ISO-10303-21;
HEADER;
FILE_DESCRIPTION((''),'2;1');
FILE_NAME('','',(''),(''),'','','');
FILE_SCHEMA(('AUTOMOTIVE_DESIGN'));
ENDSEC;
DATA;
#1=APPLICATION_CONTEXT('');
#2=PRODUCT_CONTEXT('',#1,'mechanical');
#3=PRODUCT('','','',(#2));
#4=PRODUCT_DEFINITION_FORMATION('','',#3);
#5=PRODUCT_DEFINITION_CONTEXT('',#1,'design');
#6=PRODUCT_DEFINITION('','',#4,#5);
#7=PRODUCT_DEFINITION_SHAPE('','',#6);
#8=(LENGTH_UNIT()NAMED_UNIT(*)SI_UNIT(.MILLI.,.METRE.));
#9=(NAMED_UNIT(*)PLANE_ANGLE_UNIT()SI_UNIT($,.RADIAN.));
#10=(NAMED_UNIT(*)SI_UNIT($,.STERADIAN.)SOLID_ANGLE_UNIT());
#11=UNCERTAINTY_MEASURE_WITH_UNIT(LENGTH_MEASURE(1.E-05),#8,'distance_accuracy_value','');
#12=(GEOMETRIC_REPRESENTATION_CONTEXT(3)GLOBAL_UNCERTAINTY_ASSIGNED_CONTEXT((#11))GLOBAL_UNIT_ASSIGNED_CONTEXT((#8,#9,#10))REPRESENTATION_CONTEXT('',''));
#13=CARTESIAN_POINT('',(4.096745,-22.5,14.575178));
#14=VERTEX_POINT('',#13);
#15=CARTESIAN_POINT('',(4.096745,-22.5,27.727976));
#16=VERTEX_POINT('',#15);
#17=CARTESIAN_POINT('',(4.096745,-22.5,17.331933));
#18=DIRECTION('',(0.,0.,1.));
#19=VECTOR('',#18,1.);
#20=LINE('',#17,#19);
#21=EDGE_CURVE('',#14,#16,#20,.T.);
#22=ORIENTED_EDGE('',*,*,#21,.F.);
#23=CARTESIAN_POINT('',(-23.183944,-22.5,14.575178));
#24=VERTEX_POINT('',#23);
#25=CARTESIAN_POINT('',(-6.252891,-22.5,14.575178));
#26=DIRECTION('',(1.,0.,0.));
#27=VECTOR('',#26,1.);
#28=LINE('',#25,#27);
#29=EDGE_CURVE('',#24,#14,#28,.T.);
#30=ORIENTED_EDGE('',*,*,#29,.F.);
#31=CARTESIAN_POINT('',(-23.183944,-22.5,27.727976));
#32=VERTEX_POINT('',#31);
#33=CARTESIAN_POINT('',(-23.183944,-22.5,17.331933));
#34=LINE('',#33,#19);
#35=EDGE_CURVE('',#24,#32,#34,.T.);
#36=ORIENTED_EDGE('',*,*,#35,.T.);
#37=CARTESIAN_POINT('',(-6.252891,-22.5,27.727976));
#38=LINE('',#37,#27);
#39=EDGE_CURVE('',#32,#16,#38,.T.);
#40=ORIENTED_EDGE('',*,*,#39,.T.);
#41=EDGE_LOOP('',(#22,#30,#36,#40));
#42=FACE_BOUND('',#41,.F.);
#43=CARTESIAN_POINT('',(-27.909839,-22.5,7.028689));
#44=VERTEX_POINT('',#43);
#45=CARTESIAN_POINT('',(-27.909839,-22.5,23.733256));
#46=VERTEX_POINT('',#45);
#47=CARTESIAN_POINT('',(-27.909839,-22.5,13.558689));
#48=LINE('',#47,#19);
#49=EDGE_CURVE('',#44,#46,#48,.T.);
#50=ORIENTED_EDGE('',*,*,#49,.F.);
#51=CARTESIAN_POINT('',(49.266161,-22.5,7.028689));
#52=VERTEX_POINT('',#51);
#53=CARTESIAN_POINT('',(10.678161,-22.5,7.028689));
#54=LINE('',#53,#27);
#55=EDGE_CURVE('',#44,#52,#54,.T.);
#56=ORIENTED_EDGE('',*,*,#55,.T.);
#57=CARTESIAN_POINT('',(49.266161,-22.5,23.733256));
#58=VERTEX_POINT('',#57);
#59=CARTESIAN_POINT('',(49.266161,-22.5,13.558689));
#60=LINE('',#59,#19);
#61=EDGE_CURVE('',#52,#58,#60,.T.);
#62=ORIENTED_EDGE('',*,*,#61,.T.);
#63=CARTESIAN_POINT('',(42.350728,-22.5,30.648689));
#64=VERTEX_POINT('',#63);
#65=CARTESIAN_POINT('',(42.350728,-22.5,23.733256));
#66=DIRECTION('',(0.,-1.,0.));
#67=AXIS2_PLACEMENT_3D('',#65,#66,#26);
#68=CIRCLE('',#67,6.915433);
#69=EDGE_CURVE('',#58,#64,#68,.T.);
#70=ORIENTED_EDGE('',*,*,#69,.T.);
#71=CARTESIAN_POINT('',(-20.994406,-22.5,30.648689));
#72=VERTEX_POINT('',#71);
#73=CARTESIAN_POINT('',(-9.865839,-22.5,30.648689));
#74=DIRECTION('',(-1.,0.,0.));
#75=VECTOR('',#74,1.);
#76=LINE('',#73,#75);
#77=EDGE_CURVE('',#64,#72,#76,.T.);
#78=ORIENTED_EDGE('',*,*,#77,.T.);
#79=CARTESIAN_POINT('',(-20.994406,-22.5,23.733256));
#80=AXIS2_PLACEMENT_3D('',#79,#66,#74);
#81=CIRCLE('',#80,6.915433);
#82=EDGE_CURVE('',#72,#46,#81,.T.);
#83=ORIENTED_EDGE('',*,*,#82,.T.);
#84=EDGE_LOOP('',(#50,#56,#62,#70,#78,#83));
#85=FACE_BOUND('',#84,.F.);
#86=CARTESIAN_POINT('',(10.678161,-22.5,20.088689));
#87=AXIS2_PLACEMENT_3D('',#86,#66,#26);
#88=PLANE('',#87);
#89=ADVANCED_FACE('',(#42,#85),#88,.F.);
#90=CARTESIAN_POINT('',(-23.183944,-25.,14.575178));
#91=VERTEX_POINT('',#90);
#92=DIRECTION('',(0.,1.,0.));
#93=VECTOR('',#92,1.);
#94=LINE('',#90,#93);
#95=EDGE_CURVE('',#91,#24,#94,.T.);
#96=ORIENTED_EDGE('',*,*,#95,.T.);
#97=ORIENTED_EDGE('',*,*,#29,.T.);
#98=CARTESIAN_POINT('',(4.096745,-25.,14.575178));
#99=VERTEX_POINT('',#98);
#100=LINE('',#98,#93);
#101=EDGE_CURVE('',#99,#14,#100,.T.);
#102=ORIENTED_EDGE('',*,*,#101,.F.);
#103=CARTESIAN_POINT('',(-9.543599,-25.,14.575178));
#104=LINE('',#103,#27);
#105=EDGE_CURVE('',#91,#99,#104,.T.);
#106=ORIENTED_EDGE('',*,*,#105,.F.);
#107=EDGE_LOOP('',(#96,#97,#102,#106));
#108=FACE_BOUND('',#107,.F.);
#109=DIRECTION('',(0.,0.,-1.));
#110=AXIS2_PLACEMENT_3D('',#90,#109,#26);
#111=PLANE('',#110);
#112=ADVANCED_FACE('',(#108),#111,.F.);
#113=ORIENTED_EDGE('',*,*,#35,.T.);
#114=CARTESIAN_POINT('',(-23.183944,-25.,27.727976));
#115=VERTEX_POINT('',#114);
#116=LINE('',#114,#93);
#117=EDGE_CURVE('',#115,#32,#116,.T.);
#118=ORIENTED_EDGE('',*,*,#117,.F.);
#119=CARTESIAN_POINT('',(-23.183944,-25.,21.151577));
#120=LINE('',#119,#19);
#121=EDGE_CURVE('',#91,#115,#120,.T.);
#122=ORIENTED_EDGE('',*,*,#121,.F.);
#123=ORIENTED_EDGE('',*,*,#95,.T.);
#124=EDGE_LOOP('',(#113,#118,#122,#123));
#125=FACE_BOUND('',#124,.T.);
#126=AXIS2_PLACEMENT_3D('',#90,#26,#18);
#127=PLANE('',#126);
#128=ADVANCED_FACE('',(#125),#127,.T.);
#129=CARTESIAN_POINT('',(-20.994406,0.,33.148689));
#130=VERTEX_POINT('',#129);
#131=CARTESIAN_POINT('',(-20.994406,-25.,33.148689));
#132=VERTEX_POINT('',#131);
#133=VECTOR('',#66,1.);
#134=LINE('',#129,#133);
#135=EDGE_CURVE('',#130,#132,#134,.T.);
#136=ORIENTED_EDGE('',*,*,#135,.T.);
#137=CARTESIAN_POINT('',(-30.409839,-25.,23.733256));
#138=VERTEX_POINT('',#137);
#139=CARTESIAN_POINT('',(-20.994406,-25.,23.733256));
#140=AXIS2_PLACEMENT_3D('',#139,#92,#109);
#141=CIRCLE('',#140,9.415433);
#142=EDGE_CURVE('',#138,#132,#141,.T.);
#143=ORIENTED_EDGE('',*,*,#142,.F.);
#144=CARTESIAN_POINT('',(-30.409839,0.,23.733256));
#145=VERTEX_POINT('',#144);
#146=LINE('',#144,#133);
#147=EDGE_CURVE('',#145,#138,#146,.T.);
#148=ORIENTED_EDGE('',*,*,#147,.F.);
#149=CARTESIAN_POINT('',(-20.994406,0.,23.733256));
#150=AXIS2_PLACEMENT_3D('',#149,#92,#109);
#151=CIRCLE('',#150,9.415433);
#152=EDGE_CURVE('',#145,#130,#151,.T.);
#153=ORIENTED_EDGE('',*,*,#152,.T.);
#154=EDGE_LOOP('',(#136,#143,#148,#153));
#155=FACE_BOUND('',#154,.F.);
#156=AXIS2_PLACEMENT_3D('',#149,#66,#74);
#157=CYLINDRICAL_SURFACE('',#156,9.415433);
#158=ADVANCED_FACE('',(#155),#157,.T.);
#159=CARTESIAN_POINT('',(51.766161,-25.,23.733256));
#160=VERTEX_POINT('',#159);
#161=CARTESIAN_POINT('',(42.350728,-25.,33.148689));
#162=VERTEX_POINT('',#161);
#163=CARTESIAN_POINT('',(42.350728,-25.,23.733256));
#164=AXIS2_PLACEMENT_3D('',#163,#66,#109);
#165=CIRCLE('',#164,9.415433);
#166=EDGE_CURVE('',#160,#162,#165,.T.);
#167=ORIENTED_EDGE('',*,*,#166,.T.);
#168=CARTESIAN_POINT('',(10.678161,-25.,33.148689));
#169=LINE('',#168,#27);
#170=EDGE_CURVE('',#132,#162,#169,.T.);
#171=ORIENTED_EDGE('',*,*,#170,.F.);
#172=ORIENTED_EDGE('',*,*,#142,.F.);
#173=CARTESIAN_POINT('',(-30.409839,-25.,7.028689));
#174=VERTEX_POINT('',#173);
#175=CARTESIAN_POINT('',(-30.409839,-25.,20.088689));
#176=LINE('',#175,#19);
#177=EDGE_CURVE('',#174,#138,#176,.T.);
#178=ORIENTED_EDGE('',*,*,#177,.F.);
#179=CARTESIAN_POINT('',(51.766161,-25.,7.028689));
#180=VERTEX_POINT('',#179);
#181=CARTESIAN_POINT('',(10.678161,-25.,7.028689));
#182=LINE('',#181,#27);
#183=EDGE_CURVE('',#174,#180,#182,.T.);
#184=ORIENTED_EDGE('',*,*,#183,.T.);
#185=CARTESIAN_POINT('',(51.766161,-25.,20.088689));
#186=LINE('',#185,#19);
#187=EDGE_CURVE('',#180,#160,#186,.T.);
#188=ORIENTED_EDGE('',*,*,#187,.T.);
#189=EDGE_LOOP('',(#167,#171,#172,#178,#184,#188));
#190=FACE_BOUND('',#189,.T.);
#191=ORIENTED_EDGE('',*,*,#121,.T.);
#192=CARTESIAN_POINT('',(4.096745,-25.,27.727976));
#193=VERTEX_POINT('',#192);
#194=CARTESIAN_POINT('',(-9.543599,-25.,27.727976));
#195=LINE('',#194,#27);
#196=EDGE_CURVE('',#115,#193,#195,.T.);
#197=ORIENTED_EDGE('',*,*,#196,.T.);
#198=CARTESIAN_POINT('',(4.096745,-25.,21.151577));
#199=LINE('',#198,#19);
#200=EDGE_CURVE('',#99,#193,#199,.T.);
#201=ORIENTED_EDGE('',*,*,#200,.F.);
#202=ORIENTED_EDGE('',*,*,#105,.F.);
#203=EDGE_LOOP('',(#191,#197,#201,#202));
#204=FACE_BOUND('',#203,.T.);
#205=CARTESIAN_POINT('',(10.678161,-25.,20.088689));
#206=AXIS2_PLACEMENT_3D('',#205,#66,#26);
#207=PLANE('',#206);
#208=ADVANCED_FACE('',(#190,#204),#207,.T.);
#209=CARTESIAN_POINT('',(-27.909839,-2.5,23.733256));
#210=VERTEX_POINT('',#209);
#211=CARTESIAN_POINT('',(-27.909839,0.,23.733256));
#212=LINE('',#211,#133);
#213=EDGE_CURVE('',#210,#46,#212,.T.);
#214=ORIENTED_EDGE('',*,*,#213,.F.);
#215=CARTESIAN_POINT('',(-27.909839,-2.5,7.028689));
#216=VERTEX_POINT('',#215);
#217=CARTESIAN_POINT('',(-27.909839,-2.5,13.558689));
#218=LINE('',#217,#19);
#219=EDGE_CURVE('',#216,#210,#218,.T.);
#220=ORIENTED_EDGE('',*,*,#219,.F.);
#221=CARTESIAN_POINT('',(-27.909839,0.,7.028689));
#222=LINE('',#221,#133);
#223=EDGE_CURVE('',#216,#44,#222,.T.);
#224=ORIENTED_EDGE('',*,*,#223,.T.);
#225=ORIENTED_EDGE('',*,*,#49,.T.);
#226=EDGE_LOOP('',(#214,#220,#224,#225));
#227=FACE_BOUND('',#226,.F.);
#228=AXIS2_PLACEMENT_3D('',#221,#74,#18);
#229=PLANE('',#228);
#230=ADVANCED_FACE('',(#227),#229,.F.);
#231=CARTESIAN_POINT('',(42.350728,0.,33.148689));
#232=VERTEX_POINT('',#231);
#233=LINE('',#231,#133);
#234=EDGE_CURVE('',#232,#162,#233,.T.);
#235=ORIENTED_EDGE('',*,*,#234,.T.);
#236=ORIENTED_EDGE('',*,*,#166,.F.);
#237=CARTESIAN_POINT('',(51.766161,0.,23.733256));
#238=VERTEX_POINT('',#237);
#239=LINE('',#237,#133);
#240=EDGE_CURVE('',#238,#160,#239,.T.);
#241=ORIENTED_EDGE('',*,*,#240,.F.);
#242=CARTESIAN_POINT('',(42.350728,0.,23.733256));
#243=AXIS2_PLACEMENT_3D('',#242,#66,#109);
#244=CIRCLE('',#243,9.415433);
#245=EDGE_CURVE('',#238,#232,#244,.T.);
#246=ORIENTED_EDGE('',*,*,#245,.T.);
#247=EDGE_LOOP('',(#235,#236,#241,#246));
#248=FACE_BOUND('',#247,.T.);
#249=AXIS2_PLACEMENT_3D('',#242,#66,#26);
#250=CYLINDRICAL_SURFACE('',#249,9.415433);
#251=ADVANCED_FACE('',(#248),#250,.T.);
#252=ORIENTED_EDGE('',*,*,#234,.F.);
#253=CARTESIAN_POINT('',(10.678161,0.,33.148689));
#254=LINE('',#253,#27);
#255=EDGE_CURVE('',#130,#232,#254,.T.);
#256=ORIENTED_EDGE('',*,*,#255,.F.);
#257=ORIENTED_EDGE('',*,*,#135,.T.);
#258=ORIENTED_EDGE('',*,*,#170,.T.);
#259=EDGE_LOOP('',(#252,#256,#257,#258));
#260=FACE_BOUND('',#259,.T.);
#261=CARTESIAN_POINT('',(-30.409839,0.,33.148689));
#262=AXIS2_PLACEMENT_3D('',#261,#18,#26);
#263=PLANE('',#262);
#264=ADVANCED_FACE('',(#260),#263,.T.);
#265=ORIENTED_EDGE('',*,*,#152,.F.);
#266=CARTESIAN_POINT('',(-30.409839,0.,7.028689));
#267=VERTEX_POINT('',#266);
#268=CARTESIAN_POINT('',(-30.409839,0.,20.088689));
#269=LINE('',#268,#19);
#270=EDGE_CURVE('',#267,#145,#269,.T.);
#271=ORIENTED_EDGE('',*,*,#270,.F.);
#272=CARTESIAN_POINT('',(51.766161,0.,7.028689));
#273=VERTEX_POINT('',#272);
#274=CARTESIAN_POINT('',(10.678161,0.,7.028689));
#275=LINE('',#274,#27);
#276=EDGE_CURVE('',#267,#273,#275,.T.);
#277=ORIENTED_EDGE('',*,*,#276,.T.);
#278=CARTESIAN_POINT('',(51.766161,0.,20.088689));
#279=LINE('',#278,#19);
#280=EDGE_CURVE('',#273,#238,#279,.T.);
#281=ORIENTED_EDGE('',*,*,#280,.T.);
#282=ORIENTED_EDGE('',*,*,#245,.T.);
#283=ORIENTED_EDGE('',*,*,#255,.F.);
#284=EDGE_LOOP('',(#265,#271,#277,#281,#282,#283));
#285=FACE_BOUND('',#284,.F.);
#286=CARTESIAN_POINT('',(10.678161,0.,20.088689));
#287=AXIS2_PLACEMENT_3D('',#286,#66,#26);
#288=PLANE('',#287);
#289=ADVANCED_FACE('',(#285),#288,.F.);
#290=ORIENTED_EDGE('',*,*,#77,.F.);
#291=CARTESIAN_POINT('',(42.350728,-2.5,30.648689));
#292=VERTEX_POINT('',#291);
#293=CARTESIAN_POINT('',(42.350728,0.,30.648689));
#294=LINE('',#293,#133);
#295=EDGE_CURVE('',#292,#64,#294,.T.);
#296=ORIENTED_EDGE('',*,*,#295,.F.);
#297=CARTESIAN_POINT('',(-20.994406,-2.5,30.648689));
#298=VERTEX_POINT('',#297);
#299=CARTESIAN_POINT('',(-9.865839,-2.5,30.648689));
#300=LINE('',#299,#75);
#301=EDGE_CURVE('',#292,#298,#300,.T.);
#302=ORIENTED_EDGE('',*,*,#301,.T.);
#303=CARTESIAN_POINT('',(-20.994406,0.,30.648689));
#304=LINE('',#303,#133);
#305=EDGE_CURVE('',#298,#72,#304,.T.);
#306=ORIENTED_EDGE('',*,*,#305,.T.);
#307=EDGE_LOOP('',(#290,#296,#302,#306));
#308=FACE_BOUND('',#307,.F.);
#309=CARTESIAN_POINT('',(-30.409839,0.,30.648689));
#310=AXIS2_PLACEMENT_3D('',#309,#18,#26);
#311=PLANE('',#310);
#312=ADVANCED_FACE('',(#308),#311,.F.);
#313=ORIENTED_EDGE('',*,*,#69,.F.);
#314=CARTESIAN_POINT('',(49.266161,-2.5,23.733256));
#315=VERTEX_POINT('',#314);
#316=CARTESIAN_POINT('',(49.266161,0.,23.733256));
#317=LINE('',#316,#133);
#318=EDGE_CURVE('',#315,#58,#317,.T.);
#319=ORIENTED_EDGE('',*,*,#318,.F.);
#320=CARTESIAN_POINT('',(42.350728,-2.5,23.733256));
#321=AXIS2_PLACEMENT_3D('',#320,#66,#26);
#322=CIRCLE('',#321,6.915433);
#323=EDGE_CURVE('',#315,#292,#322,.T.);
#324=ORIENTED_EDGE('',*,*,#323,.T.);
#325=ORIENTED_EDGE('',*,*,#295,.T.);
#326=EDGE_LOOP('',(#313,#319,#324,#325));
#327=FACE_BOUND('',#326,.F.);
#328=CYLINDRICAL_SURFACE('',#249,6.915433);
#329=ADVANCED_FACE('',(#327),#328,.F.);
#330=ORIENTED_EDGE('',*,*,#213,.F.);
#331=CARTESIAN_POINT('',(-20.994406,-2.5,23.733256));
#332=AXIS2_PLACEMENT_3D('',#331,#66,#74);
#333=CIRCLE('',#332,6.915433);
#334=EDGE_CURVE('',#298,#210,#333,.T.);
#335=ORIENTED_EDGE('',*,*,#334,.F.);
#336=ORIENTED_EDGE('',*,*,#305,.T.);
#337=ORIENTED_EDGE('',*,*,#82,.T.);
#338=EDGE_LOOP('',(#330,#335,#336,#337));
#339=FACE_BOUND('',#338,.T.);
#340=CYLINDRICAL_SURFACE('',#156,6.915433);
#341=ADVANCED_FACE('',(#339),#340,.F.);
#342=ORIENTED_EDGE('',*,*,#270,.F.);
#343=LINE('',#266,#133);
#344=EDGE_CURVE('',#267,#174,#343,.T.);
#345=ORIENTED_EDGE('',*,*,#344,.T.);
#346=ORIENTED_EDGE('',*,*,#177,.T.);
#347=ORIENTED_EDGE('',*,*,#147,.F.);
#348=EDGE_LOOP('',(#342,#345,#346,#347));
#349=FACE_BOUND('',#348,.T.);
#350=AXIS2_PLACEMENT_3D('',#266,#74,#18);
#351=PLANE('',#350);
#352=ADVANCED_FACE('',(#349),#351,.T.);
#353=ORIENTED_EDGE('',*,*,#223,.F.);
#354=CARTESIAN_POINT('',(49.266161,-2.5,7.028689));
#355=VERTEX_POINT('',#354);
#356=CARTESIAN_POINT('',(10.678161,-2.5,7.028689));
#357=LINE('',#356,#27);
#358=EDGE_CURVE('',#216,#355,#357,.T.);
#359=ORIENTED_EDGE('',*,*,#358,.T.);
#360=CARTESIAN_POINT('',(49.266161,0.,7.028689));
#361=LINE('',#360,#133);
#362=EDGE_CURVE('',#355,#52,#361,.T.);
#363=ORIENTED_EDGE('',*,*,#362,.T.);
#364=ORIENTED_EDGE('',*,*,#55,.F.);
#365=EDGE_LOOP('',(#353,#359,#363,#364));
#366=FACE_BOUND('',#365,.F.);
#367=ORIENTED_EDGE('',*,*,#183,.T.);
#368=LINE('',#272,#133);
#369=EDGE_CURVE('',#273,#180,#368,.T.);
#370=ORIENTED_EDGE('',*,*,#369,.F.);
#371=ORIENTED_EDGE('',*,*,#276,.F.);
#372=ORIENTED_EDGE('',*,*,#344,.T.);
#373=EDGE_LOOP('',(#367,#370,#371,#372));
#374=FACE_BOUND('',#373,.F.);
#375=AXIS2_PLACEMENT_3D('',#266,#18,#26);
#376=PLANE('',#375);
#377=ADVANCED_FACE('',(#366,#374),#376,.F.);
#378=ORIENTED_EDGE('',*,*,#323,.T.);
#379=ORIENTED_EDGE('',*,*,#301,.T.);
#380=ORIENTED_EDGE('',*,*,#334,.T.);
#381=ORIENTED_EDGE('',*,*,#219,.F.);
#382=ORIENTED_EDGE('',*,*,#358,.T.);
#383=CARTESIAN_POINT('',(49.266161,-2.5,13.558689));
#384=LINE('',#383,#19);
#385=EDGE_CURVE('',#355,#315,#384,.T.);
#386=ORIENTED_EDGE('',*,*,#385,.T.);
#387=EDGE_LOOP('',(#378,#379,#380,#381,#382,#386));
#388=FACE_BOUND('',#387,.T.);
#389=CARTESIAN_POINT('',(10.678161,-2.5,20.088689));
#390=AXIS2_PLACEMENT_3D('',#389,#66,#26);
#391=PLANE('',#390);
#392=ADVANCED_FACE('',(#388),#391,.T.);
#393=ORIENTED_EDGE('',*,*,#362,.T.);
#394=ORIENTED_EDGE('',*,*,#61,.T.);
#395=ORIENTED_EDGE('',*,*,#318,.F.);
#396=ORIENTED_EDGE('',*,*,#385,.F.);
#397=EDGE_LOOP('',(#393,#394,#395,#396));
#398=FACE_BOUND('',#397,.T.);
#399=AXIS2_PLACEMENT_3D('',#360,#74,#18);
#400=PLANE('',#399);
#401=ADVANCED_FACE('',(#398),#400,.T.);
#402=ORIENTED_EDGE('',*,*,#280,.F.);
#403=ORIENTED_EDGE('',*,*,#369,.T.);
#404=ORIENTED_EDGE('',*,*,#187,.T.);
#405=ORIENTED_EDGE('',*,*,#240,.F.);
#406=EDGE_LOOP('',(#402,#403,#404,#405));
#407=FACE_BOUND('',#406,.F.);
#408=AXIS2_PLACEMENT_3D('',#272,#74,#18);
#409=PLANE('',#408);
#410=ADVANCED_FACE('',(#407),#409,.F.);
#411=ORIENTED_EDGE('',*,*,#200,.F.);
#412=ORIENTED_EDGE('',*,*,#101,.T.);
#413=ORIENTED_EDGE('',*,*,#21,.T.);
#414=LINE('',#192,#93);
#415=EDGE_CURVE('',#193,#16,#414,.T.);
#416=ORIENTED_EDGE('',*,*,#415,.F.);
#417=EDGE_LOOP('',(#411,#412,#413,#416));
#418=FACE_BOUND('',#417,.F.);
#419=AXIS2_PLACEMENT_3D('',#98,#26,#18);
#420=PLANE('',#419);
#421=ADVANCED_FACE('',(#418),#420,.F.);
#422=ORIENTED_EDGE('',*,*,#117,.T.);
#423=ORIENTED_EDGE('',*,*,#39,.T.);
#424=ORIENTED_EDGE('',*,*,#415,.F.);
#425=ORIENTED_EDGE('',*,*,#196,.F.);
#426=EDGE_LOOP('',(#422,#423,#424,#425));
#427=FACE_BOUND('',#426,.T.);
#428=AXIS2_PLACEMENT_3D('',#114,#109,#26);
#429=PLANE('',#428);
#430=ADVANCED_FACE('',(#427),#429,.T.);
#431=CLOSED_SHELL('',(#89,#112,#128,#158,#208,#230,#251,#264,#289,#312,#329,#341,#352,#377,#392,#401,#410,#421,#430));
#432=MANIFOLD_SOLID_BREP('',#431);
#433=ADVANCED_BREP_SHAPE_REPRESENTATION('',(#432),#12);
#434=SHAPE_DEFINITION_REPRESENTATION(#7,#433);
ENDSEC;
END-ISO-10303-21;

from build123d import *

# Parameters (mm, degrees)
F0_W     = 82.176
F0_H     = 26.12
F1_DEPTH = 25
F2_R     = 9.4154328933
F3_T     = -2.5
F4_W     = 27.2806887515
F4_H     = 13.1527986377
F5_DEPTH = 14.9


# Not quite as in the source:
# - a feature names something its author has since deleted; it is built from what else it names


with BuildPart() as f1:
    # F0 (on Front) → F1 (new body)
    with BuildSketch(Plane.XZ):
        with Locations((10.6781609957, 20.0886886767)):
            Rectangle(F0_W, F0_H)
    extrude(amount=F1_DEPTH)

    # F2
    f2_edges = [f1.edges().sort_by_distance(p)[0] for p in [
        (-30.409839, -12.5, 33.148689),
        (51.766161, -12.5, 33.148689),
    ]]
    fillet(f2_edges, radius=F2_R)

    # F3
    f3_openings = [f1.faces().sort_by_distance(p)[0] for p in [
        (10.678161, -12.5, 7.028689),
    ]]
    offset(amount=F3_T, openings=f3_openings)

    # F4 (on face) → F5 (cut)
    with BuildSketch(Plane.XZ.offset(25)):
        with Locations((-9.543599328, 21.1515771225)):
            Rectangle(F4_W, F4_H)
    extrude(amount=-F5_DEPTH, mode=Mode.SUBTRACT)


solid = f1.part
